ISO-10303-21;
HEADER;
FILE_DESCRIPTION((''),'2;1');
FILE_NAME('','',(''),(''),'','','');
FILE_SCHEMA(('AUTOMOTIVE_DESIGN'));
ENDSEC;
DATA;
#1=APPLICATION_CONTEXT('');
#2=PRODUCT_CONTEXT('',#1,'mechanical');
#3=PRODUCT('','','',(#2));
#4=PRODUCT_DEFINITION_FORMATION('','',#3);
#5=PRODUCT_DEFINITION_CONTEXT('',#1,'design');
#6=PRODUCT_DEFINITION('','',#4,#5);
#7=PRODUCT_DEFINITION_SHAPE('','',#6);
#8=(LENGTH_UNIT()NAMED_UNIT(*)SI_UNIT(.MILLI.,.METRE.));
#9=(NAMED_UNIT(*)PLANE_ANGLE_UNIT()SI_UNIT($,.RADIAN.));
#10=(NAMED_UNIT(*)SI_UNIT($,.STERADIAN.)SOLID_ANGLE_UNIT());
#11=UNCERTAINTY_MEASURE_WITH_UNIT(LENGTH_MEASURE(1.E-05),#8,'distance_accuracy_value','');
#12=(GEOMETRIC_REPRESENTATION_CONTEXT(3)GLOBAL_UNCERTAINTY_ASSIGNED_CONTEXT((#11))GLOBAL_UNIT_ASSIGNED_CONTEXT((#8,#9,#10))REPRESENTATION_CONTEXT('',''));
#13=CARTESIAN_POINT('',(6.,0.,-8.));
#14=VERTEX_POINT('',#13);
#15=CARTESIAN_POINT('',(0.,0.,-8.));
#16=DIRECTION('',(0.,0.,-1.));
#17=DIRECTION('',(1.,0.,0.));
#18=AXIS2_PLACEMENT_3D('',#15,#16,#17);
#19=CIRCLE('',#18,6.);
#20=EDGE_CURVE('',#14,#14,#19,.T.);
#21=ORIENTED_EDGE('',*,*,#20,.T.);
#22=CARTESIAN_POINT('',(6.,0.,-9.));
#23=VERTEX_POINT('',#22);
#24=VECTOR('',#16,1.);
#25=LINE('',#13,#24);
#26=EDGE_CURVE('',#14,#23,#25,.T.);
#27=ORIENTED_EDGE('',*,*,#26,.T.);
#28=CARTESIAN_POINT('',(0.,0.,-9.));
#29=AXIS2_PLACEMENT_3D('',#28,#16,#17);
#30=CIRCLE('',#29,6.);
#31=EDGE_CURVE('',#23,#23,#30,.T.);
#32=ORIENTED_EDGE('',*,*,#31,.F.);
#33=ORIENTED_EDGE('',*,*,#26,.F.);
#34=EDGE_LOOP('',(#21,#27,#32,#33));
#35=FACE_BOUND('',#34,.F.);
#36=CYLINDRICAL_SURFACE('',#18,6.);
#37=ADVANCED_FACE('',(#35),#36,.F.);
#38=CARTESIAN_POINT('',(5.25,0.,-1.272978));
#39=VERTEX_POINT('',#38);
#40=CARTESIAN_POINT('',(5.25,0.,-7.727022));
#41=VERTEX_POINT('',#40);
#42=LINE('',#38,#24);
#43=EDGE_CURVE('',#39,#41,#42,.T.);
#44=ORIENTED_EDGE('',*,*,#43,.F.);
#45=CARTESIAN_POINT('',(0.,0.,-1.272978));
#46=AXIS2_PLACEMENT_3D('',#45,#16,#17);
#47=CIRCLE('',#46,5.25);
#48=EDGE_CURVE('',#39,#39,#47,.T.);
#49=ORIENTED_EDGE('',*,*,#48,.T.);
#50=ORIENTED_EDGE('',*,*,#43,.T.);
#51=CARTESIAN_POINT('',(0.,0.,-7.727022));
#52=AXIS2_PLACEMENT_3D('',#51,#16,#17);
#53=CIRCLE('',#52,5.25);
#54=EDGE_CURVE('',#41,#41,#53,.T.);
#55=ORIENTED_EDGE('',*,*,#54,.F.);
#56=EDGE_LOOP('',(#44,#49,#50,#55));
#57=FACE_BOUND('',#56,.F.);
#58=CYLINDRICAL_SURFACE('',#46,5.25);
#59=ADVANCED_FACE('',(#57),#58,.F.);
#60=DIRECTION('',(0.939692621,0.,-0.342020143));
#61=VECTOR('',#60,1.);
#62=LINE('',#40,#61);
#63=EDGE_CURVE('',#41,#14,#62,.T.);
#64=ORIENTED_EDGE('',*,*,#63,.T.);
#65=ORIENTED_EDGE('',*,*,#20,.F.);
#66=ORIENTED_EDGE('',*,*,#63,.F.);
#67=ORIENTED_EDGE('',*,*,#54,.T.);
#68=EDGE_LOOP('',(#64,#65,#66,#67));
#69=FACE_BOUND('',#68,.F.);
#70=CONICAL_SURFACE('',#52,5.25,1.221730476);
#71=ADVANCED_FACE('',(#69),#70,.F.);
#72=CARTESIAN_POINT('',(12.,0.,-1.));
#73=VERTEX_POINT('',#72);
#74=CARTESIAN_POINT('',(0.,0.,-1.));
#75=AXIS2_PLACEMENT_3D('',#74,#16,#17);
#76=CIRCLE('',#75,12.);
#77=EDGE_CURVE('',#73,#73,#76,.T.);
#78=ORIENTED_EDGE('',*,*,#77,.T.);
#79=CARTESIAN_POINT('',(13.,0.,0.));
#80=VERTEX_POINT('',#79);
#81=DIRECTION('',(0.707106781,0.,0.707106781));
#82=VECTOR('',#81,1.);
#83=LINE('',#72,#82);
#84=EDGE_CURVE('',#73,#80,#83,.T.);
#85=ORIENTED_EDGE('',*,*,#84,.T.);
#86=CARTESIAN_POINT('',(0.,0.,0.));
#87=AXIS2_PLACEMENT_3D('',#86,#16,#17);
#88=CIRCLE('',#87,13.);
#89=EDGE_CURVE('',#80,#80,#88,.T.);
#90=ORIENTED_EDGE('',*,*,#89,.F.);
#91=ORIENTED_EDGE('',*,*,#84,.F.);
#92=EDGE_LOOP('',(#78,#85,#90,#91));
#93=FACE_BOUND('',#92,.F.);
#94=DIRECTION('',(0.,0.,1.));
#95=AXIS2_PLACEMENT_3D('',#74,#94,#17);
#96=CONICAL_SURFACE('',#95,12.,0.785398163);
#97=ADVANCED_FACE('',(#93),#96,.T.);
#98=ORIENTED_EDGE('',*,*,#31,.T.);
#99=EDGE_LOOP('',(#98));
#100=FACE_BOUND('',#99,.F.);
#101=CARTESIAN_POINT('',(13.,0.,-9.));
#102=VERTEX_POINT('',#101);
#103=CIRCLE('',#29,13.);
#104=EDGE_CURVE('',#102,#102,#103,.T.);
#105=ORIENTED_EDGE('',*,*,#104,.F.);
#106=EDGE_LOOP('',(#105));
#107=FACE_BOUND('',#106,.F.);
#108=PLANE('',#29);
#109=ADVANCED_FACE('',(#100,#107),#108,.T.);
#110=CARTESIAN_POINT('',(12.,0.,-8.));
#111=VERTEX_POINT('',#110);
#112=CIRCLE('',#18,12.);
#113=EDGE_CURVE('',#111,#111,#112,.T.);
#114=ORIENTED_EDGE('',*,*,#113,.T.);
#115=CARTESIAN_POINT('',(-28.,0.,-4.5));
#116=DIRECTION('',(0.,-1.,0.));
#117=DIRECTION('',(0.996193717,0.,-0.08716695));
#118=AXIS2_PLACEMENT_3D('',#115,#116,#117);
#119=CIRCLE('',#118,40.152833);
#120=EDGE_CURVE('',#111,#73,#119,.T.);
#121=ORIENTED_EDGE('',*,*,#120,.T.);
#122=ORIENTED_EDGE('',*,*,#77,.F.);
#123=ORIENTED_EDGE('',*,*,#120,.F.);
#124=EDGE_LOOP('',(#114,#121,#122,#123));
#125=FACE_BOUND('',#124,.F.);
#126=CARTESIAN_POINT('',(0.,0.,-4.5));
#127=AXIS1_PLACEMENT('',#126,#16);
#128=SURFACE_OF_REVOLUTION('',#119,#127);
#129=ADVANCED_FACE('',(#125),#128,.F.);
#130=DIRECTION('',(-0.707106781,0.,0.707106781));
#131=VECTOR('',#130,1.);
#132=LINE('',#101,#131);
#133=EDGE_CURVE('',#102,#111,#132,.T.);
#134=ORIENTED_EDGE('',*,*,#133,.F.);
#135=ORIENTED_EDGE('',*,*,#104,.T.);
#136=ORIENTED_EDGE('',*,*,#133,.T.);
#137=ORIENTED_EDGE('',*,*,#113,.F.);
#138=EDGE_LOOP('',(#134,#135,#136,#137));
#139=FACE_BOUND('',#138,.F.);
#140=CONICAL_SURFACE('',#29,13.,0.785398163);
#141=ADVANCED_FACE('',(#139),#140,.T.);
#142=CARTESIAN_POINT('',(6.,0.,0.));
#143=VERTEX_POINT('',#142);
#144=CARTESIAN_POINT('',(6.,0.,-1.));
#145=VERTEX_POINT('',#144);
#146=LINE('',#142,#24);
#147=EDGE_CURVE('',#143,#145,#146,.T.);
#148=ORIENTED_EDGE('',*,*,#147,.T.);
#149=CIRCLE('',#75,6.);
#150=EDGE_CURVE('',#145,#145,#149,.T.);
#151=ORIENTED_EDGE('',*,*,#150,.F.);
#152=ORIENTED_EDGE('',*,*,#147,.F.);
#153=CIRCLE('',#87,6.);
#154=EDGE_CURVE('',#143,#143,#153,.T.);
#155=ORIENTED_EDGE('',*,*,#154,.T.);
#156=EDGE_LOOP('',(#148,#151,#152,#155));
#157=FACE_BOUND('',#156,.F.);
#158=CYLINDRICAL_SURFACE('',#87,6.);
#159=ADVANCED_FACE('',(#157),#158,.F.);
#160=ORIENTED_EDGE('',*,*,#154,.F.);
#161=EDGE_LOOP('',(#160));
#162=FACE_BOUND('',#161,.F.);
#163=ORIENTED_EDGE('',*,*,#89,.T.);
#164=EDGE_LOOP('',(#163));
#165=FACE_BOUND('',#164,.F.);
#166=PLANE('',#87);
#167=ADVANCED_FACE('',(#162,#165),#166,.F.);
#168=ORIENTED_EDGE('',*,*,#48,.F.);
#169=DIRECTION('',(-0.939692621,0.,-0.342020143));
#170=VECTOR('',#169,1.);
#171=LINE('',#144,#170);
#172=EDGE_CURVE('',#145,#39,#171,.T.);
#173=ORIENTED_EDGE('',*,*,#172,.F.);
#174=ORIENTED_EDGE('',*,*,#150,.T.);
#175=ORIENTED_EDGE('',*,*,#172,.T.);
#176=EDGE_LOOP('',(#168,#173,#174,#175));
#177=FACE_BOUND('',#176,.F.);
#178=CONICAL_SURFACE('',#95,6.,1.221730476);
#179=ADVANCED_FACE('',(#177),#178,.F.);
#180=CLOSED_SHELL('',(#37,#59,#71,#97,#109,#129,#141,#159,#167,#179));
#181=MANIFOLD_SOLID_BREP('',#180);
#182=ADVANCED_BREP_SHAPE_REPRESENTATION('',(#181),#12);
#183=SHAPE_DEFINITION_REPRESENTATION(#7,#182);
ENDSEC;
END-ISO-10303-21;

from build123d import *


# Not quite as in the source:
# - a feature names something its author has since deleted; it is built from what else it names


with BuildPart() as f1:
    # F0 (on Front) → F1 (revolve)
    with BuildSketch(Plane.XZ):
        Polygon((6, -9), (13, -9), (12, -8), (12, -1), (13, 0), (6, 0), (6, -1), (5.25, -1.2729776757), (5.25, -7.7270223243), (6, -8), align=None)
        with BuildLine():
            Line((12, -1), (12, -8))
            ThreePointArc((12, -8), (12.1528330258, -4.5), (12, -1))
        make_face()
    revolve(axis=Axis((0, 0, -4.5), (0, 0, -1)))


solid = f1.part
